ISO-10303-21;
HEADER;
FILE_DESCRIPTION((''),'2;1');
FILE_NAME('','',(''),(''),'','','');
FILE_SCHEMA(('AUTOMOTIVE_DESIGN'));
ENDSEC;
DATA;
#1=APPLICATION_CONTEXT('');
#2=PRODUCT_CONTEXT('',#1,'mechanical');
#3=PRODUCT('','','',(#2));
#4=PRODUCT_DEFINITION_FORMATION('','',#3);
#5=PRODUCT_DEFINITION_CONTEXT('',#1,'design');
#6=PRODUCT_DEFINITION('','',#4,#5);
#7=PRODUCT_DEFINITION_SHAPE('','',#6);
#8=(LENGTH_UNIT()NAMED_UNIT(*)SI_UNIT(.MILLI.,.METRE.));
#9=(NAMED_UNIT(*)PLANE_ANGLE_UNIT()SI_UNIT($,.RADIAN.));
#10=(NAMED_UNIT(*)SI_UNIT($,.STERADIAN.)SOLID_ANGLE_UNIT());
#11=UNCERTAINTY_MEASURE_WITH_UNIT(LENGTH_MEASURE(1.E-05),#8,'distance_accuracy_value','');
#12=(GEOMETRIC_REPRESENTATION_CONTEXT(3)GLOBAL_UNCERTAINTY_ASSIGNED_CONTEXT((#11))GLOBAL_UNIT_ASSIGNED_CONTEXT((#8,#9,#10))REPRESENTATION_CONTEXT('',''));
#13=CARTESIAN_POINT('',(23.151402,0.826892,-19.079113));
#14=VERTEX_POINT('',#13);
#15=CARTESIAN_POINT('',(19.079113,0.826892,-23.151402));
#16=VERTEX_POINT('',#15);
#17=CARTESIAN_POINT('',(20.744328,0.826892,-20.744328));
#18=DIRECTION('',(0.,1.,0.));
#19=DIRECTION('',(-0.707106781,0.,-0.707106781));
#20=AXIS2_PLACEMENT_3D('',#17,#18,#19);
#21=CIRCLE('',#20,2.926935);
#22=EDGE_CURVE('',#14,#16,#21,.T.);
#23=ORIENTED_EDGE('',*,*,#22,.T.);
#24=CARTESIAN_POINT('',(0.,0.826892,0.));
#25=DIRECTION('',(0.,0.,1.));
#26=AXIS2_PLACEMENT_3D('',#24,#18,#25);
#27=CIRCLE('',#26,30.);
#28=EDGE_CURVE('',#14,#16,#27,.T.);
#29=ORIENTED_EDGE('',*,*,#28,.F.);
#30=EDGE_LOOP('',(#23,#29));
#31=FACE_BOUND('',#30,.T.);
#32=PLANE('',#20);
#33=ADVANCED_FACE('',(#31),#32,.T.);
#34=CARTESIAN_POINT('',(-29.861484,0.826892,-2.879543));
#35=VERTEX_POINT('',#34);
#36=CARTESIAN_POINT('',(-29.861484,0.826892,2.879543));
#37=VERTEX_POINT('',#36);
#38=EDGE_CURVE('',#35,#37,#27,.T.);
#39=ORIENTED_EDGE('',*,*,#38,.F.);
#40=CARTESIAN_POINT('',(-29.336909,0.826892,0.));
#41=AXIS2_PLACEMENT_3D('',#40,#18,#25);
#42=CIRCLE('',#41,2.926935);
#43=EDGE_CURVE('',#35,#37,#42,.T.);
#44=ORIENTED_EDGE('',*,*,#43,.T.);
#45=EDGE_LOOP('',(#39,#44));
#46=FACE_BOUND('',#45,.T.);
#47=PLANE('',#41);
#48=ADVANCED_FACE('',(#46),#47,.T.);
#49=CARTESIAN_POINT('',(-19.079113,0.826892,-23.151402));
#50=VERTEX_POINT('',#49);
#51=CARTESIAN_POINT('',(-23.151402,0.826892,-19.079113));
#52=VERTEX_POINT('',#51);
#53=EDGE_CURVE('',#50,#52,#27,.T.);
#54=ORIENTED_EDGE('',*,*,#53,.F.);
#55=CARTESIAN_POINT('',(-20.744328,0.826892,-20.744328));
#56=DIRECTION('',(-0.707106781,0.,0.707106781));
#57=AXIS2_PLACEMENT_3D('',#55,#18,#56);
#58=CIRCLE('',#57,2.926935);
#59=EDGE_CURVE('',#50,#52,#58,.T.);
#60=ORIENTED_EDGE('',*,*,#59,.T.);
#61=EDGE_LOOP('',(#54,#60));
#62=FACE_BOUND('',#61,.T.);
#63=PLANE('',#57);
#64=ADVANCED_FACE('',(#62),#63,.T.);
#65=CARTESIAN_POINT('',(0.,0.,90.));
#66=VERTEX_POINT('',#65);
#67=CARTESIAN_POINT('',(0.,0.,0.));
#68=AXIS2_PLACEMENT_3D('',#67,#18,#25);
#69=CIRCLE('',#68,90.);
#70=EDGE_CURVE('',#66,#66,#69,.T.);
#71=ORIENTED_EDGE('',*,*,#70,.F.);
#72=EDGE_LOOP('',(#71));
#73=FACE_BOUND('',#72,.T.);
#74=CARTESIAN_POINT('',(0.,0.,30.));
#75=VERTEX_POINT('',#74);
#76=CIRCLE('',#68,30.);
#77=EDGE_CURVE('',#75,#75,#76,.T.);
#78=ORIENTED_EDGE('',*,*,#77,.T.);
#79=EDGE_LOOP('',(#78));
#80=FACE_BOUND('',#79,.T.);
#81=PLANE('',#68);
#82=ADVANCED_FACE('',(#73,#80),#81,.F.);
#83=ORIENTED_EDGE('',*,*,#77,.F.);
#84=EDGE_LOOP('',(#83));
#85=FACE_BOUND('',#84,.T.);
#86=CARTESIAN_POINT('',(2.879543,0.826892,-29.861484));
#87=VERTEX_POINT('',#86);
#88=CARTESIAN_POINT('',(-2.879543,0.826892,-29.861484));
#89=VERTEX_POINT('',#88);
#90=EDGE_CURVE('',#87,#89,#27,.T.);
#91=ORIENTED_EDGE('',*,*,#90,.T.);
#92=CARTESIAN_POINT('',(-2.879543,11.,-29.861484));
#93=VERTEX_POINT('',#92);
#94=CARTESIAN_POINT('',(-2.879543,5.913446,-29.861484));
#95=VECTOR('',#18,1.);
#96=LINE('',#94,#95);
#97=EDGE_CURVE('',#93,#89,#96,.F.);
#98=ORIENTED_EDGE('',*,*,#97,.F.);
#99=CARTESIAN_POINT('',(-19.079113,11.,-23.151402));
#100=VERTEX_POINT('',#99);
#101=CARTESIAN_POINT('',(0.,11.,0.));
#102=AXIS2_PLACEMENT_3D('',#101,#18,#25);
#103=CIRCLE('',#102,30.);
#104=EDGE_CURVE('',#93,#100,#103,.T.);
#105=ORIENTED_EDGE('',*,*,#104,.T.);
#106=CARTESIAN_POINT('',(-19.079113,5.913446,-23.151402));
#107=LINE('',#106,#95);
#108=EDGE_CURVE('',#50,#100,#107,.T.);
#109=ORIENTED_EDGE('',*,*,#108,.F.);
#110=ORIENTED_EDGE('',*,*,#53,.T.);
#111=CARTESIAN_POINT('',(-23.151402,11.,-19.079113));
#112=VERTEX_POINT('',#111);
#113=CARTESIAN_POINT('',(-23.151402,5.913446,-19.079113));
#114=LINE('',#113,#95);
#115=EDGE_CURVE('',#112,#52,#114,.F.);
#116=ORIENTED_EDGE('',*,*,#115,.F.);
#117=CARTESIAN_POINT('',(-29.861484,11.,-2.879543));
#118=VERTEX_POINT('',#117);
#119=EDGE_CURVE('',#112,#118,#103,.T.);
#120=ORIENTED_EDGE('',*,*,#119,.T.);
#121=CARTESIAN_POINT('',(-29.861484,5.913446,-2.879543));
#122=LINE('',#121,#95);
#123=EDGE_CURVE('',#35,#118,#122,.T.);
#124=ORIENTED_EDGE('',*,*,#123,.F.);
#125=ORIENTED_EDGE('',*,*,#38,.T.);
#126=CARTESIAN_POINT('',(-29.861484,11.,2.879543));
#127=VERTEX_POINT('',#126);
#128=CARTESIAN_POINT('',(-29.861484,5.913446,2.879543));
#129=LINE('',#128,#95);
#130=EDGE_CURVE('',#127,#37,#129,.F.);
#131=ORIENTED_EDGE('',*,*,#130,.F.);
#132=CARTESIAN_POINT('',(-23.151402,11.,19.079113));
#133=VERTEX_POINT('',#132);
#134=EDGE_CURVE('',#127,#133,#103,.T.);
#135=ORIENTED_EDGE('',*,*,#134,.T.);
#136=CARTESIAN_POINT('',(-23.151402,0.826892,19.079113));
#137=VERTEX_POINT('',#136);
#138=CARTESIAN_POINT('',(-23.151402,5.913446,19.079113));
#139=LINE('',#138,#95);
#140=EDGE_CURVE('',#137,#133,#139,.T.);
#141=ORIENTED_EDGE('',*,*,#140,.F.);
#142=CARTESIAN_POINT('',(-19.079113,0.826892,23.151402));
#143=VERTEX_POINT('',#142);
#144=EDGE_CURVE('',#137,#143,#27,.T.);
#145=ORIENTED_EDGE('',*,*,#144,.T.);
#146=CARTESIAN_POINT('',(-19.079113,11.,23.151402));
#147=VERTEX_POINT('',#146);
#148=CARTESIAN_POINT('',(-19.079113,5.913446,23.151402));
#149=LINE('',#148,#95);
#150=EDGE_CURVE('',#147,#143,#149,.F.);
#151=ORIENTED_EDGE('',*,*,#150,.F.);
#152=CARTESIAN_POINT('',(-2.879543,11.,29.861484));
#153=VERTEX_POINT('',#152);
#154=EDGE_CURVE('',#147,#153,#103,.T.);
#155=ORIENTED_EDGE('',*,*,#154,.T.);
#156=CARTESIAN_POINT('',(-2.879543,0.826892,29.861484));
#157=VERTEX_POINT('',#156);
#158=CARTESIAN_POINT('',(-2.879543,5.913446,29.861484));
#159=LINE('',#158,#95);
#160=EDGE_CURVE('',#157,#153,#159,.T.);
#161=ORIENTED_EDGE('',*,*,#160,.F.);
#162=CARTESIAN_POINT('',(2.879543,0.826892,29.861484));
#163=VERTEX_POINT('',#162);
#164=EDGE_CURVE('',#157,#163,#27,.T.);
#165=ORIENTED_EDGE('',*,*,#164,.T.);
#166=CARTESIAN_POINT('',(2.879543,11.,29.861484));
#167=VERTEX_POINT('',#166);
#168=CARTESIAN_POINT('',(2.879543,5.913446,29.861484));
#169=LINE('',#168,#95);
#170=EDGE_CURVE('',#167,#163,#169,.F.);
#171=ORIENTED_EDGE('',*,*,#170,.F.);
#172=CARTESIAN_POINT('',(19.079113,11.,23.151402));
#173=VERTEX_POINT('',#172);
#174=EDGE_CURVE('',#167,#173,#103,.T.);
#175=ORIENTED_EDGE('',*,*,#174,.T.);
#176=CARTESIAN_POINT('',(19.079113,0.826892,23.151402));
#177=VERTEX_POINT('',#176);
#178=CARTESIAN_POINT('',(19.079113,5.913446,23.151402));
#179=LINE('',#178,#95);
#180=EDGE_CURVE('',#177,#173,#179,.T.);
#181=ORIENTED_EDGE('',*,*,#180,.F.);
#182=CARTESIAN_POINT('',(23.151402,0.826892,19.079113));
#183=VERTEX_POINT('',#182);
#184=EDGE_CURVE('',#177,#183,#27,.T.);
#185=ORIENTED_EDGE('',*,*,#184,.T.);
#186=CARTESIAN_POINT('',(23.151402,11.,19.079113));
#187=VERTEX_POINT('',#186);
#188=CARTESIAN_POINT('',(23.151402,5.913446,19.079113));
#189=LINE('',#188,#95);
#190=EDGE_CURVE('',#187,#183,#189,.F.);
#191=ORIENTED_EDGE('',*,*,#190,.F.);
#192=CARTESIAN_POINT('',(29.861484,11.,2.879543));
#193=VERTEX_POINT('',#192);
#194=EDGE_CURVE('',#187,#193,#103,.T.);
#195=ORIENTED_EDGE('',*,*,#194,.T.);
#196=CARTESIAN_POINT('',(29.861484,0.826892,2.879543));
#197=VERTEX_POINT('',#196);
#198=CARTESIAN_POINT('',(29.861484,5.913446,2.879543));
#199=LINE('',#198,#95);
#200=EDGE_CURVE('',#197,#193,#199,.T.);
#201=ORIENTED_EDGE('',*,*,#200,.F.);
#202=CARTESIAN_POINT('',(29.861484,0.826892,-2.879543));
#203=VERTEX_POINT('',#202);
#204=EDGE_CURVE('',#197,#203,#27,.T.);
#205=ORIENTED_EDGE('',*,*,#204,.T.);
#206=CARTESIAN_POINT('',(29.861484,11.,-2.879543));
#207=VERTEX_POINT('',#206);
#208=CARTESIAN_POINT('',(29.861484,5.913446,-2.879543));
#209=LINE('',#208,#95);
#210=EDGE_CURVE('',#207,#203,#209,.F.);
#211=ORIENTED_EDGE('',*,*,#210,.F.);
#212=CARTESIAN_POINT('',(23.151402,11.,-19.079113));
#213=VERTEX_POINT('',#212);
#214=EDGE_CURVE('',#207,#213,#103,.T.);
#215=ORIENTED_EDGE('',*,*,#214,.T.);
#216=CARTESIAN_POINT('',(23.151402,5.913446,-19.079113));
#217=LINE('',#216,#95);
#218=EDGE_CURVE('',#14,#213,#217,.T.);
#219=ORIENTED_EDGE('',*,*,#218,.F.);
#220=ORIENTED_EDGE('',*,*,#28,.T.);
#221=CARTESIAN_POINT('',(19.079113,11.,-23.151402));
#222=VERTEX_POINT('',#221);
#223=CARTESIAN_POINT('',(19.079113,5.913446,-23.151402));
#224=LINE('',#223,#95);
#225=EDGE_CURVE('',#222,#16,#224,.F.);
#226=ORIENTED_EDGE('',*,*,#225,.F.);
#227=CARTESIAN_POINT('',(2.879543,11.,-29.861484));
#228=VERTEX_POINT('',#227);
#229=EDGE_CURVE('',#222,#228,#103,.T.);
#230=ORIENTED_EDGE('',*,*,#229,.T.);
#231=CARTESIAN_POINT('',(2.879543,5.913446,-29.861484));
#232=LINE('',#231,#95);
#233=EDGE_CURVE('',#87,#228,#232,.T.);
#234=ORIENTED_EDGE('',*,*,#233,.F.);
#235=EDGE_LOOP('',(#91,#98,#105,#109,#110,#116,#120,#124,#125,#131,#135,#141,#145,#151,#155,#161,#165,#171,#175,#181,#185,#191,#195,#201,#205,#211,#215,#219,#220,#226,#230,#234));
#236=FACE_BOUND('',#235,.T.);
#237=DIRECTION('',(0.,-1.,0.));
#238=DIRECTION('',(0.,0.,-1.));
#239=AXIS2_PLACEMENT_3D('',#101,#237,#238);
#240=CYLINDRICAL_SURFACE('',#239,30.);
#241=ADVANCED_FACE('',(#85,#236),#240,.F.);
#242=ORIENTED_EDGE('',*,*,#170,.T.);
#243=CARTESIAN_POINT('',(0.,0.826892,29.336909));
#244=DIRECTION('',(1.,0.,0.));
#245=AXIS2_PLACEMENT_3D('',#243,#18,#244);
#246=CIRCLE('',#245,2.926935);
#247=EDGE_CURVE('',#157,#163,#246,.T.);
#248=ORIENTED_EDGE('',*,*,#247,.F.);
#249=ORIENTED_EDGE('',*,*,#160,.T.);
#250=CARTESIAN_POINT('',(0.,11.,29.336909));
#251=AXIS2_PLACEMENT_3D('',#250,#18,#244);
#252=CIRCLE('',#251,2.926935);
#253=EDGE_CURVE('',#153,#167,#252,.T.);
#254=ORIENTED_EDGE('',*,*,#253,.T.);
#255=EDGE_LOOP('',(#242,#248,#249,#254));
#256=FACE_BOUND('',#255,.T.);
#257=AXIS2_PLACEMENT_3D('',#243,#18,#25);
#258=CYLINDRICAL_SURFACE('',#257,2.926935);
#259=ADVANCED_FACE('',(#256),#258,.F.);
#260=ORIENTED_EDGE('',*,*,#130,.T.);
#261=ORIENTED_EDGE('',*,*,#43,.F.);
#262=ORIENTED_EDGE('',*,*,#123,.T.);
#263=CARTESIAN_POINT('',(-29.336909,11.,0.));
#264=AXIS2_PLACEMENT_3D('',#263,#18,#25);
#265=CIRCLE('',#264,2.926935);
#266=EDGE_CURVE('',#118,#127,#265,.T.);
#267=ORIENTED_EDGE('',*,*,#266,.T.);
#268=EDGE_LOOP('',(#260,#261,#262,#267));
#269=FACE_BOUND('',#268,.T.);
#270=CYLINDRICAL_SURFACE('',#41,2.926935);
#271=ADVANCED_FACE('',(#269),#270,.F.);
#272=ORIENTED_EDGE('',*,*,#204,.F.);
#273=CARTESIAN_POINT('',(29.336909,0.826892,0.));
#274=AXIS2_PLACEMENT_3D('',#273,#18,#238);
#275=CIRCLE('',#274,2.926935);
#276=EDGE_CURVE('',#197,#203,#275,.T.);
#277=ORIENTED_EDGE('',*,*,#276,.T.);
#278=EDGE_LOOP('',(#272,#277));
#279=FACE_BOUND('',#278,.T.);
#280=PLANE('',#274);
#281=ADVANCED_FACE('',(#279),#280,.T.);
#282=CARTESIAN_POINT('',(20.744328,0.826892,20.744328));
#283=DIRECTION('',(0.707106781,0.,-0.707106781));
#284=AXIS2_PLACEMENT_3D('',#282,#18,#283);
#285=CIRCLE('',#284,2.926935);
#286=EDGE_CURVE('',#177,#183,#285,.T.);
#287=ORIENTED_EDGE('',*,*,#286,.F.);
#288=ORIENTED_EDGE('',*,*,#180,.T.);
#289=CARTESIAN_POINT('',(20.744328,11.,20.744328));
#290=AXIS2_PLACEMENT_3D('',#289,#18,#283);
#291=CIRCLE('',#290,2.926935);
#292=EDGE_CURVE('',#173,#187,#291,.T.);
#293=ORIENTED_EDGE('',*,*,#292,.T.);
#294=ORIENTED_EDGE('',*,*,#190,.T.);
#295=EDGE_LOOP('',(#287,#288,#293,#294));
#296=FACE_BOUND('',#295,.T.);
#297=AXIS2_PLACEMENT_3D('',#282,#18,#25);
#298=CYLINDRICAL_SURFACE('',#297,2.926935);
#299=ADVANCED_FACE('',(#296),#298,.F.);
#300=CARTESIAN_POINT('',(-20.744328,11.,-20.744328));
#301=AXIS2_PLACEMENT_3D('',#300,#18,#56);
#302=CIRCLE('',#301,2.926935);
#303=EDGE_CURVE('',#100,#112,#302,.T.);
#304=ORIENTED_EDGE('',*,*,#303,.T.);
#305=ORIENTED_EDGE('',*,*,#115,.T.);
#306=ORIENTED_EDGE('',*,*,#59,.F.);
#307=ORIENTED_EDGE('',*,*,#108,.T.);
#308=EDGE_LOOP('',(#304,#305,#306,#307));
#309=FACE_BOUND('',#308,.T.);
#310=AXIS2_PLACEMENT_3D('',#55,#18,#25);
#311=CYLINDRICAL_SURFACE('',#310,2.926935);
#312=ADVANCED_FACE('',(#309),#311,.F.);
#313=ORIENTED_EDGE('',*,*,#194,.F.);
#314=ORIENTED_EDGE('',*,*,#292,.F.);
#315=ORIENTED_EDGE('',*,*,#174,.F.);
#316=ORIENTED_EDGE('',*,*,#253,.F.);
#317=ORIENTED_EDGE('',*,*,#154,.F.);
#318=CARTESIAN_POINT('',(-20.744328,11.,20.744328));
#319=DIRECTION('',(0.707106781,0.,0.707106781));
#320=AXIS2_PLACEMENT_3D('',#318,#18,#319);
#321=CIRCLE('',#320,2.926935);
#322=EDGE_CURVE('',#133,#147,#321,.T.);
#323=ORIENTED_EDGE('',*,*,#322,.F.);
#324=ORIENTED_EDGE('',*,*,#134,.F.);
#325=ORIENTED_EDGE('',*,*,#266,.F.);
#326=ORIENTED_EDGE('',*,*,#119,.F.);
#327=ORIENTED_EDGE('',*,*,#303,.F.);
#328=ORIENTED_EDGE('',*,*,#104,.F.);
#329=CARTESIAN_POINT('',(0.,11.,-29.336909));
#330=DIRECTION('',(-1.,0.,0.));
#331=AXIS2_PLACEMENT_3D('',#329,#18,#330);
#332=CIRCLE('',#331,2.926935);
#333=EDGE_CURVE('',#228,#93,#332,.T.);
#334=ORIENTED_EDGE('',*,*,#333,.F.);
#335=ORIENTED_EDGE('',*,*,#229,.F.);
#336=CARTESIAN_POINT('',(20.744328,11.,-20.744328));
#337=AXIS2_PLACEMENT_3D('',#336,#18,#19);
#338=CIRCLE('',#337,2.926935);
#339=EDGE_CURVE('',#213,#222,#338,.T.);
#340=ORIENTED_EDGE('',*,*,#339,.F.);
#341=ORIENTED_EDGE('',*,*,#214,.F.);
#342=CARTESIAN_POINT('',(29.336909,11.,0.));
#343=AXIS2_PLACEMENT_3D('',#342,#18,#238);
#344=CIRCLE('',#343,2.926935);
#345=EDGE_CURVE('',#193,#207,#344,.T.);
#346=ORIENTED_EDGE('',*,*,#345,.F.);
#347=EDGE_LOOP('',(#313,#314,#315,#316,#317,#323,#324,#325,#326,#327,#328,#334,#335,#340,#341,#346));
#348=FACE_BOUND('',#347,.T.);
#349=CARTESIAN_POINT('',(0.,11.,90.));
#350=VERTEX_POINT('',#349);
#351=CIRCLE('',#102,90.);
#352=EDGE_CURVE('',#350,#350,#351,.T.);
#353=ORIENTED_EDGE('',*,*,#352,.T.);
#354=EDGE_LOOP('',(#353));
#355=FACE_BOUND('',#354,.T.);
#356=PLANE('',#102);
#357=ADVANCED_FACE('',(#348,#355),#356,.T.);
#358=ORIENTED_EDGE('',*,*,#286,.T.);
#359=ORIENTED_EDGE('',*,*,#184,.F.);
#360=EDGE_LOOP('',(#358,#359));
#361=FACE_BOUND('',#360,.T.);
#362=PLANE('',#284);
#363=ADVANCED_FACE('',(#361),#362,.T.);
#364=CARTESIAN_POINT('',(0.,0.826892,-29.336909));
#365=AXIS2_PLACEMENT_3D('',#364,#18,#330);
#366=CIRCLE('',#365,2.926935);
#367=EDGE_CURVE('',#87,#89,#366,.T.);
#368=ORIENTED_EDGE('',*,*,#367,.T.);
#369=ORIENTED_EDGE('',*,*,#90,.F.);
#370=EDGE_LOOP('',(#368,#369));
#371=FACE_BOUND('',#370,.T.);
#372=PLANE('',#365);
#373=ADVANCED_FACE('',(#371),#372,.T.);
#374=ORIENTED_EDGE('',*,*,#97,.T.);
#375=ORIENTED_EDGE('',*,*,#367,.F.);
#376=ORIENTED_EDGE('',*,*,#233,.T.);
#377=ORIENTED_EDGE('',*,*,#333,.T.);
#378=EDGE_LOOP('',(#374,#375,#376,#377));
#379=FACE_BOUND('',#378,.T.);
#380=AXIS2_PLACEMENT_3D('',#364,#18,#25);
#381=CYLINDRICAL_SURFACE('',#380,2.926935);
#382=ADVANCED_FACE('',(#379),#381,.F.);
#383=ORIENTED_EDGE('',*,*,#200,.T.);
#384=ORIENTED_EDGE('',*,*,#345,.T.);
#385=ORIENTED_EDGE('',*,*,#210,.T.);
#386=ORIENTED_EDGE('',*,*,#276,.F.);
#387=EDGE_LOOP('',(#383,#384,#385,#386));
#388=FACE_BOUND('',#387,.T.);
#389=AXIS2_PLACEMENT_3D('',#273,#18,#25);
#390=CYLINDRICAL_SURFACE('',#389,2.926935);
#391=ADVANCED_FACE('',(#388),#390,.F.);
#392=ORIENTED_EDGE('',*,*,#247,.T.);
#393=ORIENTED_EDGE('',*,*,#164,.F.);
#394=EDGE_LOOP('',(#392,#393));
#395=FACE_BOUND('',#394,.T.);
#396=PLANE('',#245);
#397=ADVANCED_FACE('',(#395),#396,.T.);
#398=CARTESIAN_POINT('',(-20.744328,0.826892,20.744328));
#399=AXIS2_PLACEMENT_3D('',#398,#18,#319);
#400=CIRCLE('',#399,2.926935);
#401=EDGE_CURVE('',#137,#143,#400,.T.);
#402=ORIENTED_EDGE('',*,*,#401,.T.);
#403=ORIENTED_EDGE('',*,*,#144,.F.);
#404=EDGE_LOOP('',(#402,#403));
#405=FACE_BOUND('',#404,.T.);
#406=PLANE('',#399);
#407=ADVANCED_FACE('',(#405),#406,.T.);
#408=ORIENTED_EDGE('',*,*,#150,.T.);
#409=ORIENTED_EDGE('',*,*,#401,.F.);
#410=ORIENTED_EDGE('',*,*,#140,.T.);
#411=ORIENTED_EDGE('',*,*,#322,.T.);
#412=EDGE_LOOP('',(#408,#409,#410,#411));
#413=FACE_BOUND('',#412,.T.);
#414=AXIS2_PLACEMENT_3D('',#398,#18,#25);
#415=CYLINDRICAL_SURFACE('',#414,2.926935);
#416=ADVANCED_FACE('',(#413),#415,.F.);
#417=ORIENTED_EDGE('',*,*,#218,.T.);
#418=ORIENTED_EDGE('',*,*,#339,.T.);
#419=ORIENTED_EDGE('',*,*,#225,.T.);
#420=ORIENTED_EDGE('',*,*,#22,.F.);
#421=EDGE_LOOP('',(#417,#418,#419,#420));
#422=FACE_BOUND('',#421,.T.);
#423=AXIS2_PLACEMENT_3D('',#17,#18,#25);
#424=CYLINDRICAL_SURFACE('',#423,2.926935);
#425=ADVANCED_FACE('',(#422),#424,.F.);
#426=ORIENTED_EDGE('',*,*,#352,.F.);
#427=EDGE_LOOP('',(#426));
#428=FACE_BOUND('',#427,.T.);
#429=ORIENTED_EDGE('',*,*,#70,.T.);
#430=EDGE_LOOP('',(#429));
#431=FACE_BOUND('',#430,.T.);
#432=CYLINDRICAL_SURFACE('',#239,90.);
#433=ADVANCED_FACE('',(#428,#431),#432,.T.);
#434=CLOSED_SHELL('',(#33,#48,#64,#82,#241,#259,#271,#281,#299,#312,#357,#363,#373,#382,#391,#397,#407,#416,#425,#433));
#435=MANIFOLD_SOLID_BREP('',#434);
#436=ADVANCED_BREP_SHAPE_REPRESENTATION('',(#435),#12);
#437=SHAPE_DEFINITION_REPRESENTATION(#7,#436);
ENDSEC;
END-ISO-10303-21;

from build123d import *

# Parameters (mm, degrees)
SKETCH1_R           = 90
BOSS_EXTRUDE1_DEPTH = 11
SKETCH2_R           = 30
CUT_EXTRUDE1_DEPTH  = 128.753669223
SKETCH3_R           = 2.926934744
CUT_EXTRUDE2_DEPTH  = 10.173108492
CIRPATTERN1_COUNT   = 8


with BuildPart() as part:
    # Sketch1 → Boss-Extrude1 (new body)
    with BuildSketch(Plane(origin=(0, 0, 0), x_dir=(1, 0, 0), z_dir=(0, 1, 0))):
        Circle(SKETCH1_R)
    extrude(amount=BOSS_EXTRUDE1_DEPTH)

    # Sketch2 → Cut-Extrude1 (cut, through all)
    with BuildSketch(Plane(origin=(0, 0, 0), x_dir=(1, 0, 0), z_dir=(0, 1, 0))):
        Circle(SKETCH2_R)
    extrude(amount=CUT_EXTRUDE1_DEPTH, mode=Mode.SUBTRACT)

    # Sketch3 → Cut-Extrude2 (cut)
    with BuildSketch(Plane(origin=(0, 11, 0), x_dir=(1, 0, 0), z_dir=(0, 1, 0))):
        with Locations((-29.336909485, 0)):
            Circle(SKETCH3_R)
    cut_extrude2 = extrude(amount=-CUT_EXTRUDE2_DEPTH, mode=Mode.SUBTRACT)

    # CirPattern1: Cut-Extrude2 ×8 about axis
    cirpattern1_axis = Axis((0, 0, 0), (0, 1, 0))
    for i in range(1, CIRPATTERN1_COUNT):
        add(cut_extrude2.rotate(cirpattern1_axis, i * 360 / CIRPATTERN1_COUNT), mode=Mode.SUBTRACT)


solid = part.part
